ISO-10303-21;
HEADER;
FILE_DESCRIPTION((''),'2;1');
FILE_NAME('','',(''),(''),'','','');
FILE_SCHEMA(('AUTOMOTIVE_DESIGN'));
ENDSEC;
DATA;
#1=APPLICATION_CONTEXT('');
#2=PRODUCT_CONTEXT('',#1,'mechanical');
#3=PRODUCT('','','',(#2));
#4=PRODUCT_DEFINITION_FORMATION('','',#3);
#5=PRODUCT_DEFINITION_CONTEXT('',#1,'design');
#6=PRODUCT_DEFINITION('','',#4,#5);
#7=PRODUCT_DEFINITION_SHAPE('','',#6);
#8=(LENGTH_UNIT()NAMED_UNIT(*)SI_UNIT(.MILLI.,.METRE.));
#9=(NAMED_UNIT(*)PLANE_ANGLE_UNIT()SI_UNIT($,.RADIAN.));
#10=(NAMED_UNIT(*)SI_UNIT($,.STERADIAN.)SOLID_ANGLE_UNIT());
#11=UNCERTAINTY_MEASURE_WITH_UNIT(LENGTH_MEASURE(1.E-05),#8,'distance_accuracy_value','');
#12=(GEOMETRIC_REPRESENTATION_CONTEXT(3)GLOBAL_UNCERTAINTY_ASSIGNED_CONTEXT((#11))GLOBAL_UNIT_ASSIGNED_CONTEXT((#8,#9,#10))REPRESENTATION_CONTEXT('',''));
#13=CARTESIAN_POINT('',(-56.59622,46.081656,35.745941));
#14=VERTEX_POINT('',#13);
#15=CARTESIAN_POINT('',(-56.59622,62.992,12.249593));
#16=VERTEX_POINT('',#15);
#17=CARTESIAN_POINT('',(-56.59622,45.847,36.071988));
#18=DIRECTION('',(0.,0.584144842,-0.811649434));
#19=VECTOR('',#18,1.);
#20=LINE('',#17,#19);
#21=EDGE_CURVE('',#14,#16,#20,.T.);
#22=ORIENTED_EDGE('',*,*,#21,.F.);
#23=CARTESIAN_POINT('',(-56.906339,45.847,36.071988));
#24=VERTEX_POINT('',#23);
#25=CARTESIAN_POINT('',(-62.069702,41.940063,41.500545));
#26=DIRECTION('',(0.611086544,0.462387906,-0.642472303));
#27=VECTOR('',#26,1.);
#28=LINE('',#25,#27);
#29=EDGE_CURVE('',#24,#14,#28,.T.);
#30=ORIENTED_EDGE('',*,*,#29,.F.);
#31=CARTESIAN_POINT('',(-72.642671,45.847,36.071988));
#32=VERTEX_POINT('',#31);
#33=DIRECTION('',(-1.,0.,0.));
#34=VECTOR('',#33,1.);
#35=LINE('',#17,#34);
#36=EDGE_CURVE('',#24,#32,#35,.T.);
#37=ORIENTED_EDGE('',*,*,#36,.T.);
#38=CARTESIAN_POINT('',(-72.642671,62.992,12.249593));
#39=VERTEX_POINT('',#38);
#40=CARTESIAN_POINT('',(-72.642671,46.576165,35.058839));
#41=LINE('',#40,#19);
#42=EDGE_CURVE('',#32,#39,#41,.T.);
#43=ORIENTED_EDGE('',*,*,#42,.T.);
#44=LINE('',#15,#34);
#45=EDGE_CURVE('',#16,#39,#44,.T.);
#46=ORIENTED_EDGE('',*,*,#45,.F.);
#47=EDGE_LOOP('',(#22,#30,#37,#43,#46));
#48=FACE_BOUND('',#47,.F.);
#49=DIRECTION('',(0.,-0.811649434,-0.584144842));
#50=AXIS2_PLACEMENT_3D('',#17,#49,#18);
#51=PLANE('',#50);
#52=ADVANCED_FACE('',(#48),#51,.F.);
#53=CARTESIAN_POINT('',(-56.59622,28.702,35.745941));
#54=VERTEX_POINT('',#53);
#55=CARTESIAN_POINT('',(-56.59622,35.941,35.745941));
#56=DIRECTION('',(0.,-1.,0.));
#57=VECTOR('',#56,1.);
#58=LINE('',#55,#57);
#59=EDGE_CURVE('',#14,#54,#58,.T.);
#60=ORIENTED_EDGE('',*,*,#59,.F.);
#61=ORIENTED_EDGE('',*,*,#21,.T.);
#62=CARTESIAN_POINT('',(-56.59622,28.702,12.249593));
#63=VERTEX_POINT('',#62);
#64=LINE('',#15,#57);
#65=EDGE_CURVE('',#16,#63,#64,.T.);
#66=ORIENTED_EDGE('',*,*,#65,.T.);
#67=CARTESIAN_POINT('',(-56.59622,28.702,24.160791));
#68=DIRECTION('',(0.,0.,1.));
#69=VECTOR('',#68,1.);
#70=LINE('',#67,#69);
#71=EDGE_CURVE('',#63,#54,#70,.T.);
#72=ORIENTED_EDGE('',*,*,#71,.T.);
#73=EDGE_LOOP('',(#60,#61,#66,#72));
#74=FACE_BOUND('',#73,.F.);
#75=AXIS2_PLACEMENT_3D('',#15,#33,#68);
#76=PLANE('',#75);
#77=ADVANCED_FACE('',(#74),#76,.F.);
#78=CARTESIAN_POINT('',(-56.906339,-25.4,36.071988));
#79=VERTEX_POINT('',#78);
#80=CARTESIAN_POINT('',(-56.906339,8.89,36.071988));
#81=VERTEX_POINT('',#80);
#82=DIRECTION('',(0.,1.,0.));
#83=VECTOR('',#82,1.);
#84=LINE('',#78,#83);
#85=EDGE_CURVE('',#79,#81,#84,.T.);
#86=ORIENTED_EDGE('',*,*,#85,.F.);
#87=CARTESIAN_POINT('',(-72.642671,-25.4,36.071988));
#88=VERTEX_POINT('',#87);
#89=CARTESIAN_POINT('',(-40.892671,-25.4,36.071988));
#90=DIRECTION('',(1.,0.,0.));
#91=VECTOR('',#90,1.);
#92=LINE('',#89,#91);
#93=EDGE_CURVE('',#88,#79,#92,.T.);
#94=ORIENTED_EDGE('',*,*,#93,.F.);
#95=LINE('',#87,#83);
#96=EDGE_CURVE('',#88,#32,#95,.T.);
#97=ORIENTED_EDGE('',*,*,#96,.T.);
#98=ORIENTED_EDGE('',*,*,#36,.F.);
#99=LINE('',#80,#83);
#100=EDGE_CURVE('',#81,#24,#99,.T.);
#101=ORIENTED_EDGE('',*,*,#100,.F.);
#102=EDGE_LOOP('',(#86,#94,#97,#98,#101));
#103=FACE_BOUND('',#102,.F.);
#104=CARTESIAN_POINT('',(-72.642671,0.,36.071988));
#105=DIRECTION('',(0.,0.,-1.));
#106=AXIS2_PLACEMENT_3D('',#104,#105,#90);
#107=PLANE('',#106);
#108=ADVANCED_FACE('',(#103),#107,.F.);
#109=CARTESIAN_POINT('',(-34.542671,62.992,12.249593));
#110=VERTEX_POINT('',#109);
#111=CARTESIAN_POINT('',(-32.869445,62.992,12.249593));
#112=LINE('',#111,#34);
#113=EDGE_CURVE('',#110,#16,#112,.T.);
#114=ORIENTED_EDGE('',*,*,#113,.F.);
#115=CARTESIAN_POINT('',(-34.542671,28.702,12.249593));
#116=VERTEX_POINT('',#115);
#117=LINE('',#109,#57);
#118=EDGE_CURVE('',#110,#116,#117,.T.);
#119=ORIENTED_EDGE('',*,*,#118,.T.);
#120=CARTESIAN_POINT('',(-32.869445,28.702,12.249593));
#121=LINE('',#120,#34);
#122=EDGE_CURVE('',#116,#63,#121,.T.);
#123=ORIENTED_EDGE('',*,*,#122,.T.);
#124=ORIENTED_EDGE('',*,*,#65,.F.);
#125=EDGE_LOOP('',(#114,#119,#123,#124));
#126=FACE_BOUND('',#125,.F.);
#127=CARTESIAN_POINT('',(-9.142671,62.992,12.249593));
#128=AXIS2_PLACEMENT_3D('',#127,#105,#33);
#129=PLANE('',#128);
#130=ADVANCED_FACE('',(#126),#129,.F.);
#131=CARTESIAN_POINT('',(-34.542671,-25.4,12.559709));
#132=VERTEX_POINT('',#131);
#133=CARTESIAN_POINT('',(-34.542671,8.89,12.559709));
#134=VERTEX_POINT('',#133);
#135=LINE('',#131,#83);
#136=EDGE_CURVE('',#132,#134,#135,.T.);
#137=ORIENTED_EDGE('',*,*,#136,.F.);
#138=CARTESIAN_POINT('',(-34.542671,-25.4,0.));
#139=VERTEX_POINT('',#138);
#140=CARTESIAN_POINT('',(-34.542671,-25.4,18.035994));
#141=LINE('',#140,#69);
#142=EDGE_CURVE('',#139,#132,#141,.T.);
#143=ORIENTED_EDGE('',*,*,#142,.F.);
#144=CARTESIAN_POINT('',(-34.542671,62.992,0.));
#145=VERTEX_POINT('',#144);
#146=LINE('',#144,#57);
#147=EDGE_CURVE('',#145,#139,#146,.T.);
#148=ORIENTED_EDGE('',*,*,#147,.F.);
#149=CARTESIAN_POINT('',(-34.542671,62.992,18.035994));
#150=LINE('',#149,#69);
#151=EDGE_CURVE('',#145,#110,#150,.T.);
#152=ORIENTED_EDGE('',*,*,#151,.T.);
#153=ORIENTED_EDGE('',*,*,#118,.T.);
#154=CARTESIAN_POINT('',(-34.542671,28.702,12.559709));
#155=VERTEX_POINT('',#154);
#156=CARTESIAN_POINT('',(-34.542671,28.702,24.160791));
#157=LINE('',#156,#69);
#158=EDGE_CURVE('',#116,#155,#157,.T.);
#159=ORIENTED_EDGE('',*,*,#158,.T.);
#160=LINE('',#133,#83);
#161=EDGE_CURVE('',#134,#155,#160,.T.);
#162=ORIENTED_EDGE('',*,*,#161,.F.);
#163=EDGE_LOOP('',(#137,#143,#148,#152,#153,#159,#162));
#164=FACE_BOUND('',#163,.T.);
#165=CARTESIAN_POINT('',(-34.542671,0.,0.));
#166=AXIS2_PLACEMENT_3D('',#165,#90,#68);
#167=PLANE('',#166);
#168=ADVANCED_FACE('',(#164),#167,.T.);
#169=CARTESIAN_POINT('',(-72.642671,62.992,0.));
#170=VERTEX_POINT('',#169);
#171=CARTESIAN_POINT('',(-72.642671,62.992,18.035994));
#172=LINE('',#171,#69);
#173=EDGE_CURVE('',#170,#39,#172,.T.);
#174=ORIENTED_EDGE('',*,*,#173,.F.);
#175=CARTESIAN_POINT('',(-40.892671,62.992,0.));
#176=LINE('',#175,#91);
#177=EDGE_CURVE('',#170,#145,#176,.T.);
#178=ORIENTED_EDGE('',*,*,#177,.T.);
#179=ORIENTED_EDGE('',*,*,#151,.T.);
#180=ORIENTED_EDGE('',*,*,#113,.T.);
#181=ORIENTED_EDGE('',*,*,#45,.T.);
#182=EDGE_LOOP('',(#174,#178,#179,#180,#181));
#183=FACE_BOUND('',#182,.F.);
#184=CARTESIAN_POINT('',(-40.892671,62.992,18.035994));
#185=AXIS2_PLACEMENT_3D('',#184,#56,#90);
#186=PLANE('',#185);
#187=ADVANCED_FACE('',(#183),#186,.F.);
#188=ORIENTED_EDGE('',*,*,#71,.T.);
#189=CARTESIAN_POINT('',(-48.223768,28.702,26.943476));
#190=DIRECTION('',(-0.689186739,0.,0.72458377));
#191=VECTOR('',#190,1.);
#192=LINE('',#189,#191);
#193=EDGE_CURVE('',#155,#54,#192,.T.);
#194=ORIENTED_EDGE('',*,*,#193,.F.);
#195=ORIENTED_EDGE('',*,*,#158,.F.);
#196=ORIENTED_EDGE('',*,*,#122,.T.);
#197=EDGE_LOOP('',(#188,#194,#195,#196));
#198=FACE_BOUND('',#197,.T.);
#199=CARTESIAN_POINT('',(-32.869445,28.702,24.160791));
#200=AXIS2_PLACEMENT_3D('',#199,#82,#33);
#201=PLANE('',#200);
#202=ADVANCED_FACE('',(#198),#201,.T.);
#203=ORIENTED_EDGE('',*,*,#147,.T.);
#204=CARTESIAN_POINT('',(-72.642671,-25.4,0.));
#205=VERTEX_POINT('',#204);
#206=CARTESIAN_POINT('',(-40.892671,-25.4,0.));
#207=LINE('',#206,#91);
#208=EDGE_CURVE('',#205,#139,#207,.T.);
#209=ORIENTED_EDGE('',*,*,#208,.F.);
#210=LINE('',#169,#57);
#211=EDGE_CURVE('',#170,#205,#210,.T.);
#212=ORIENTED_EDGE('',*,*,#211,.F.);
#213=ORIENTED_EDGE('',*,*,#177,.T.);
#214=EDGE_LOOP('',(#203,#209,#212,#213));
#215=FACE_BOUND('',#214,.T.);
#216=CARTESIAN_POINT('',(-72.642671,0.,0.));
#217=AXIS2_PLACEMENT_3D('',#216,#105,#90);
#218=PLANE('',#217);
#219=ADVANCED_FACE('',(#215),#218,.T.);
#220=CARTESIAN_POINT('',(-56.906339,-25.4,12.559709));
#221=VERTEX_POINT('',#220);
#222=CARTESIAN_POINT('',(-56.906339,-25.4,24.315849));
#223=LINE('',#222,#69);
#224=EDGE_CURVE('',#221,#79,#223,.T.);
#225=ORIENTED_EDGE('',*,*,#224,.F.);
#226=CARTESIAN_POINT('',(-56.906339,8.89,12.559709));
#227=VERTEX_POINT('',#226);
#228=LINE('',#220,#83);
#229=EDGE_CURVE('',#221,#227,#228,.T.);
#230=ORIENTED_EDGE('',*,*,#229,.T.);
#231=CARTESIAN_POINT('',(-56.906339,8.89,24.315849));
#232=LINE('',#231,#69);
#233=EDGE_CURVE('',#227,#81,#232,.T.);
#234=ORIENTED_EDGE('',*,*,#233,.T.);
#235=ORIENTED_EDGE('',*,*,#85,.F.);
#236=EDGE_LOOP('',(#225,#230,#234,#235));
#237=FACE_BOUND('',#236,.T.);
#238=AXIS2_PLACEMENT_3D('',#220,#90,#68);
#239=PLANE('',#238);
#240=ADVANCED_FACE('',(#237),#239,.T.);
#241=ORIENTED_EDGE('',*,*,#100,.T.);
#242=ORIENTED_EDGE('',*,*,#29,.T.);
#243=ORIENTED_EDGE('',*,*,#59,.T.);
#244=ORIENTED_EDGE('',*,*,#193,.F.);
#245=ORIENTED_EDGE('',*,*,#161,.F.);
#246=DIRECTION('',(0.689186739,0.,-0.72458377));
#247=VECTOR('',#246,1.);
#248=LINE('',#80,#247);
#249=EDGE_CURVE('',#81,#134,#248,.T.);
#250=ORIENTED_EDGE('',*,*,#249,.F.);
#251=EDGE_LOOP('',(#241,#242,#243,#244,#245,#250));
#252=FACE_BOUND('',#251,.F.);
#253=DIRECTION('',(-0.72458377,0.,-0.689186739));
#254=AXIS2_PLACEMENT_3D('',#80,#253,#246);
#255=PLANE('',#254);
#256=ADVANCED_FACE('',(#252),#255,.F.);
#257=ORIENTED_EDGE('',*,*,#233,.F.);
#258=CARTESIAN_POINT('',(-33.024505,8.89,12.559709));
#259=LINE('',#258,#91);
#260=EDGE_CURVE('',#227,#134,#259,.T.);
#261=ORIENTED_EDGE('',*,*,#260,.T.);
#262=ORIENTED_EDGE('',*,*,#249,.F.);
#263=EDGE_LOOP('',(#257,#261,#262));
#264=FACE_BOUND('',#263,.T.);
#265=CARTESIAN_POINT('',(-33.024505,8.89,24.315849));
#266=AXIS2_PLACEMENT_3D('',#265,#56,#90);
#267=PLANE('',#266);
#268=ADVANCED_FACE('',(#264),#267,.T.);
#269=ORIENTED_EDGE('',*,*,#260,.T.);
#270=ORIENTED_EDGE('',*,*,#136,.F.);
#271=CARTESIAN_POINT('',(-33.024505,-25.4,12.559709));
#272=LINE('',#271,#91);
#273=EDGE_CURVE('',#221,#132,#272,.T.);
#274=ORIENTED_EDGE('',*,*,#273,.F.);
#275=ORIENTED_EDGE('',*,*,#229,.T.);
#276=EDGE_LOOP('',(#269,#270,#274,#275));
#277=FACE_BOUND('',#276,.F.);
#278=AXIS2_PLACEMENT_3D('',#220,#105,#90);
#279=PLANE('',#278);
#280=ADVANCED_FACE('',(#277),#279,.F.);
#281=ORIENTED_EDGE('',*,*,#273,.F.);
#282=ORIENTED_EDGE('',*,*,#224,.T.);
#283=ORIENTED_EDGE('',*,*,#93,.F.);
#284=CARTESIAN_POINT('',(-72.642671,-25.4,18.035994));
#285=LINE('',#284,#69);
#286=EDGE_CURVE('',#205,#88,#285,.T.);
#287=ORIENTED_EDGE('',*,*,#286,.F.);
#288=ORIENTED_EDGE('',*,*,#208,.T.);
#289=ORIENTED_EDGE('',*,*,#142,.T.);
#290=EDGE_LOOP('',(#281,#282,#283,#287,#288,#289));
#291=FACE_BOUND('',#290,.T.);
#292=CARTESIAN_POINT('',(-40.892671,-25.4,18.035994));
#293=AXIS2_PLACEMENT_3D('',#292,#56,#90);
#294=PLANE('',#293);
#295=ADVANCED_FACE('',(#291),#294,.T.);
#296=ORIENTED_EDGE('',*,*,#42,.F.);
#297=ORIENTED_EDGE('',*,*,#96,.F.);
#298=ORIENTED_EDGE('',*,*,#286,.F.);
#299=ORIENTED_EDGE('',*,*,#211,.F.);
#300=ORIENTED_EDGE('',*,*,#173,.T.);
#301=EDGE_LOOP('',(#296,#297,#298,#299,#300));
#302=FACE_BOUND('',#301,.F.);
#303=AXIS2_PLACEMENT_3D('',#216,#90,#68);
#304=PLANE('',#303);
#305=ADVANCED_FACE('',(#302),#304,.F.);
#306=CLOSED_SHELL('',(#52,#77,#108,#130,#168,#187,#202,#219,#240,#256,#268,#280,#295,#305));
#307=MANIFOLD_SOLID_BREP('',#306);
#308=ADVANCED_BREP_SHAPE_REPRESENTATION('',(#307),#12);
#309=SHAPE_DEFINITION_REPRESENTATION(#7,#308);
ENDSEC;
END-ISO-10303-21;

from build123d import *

# Parameters (mm, degrees)
F0_W      = 63.5
F0_H      = 36.0719883448
F1_DEPTH  = 25.4
F2_DEPTH  = 62.992
F4_W      = 47.7636682294
F4_H      = 23.5122792056
F5_DEPTH  = 34.29
F3_W      = 47.4535489879
F3_H      = 23.8223956531
F6_DEPTH  = 34.29
F8_DEPTH  = 25.4
F9_DEPTH  = 25.4
F11_DEPTH = 41.402


with BuildPart() as f1:
    # F0 (on Front) → F1 (new body)
    with BuildSketch(Plane.XZ):
        with Locations((-40.8926705517, 18.0359941724)):
            Rectangle(F0_W, F0_H)
    extrude(amount=F1_DEPTH)

    # F2 (add): a face of the model
    f2_faces = [f1.faces().sort_by_distance(p)[0] for p in [
        (-40.8926705517, 0, 18.0359941724),
    ]]
    extrude(f2_faces, amount=F2_DEPTH)

    # F4 (on face) → F5 (cut)
    with BuildSketch(Plane.XZ.offset(25.4)):
        with Locations((-33.0245046664, 24.315848742)):
            Rectangle(F4_W, F4_H)
    extrude(amount=-F5_DEPTH, mode=Mode.SUBTRACT)

    # F3 (on face) → F6 (cut)
    with BuildSketch(Plane(origin=(0, 62.992, 0), x_dir=(-1, 0, 0), z_dir=(0, 1, 0))):
        with Locations((32.8694450457, 24.1607905182)):
            Rectangle(F3_W, F3_H)
    extrude(amount=-F6_DEPTH, mode=Mode.SUBTRACT)

    # F8 (cut): a face of the model
    f8_faces = [f1.faces().sort_by_distance(p)[0] for p in [
        (-9.1426705517, 18.6122366805, 11.6054298815),
    ]]
    extrude(f8_faces, amount=-F8_DEPTH, mode=Mode.SUBTRACT)

    # F7 (on face) → F9 (cut)
    with BuildSketch(Plane.YZ.offset(-56.5962195396)):
        Polygon((62.992, 36.0719883448), (45.847, 36.0719883448), (62.992, 12.2495926917), align=None)
    extrude(amount=-F9_DEPTH, mode=Mode.SUBTRACT)

    # F10 (on face) → F11 (cut)
    with BuildSketch(Plane.XZ.offset(-8.89)):
        Polygon((-34.5426705517, 36.0719883448), (-56.9063387811, 36.0719883448), (-34.5426705517, 12.5597091392), align=None)
    extrude(amount=-F11_DEPTH, mode=Mode.SUBTRACT)


solid = f1.part
